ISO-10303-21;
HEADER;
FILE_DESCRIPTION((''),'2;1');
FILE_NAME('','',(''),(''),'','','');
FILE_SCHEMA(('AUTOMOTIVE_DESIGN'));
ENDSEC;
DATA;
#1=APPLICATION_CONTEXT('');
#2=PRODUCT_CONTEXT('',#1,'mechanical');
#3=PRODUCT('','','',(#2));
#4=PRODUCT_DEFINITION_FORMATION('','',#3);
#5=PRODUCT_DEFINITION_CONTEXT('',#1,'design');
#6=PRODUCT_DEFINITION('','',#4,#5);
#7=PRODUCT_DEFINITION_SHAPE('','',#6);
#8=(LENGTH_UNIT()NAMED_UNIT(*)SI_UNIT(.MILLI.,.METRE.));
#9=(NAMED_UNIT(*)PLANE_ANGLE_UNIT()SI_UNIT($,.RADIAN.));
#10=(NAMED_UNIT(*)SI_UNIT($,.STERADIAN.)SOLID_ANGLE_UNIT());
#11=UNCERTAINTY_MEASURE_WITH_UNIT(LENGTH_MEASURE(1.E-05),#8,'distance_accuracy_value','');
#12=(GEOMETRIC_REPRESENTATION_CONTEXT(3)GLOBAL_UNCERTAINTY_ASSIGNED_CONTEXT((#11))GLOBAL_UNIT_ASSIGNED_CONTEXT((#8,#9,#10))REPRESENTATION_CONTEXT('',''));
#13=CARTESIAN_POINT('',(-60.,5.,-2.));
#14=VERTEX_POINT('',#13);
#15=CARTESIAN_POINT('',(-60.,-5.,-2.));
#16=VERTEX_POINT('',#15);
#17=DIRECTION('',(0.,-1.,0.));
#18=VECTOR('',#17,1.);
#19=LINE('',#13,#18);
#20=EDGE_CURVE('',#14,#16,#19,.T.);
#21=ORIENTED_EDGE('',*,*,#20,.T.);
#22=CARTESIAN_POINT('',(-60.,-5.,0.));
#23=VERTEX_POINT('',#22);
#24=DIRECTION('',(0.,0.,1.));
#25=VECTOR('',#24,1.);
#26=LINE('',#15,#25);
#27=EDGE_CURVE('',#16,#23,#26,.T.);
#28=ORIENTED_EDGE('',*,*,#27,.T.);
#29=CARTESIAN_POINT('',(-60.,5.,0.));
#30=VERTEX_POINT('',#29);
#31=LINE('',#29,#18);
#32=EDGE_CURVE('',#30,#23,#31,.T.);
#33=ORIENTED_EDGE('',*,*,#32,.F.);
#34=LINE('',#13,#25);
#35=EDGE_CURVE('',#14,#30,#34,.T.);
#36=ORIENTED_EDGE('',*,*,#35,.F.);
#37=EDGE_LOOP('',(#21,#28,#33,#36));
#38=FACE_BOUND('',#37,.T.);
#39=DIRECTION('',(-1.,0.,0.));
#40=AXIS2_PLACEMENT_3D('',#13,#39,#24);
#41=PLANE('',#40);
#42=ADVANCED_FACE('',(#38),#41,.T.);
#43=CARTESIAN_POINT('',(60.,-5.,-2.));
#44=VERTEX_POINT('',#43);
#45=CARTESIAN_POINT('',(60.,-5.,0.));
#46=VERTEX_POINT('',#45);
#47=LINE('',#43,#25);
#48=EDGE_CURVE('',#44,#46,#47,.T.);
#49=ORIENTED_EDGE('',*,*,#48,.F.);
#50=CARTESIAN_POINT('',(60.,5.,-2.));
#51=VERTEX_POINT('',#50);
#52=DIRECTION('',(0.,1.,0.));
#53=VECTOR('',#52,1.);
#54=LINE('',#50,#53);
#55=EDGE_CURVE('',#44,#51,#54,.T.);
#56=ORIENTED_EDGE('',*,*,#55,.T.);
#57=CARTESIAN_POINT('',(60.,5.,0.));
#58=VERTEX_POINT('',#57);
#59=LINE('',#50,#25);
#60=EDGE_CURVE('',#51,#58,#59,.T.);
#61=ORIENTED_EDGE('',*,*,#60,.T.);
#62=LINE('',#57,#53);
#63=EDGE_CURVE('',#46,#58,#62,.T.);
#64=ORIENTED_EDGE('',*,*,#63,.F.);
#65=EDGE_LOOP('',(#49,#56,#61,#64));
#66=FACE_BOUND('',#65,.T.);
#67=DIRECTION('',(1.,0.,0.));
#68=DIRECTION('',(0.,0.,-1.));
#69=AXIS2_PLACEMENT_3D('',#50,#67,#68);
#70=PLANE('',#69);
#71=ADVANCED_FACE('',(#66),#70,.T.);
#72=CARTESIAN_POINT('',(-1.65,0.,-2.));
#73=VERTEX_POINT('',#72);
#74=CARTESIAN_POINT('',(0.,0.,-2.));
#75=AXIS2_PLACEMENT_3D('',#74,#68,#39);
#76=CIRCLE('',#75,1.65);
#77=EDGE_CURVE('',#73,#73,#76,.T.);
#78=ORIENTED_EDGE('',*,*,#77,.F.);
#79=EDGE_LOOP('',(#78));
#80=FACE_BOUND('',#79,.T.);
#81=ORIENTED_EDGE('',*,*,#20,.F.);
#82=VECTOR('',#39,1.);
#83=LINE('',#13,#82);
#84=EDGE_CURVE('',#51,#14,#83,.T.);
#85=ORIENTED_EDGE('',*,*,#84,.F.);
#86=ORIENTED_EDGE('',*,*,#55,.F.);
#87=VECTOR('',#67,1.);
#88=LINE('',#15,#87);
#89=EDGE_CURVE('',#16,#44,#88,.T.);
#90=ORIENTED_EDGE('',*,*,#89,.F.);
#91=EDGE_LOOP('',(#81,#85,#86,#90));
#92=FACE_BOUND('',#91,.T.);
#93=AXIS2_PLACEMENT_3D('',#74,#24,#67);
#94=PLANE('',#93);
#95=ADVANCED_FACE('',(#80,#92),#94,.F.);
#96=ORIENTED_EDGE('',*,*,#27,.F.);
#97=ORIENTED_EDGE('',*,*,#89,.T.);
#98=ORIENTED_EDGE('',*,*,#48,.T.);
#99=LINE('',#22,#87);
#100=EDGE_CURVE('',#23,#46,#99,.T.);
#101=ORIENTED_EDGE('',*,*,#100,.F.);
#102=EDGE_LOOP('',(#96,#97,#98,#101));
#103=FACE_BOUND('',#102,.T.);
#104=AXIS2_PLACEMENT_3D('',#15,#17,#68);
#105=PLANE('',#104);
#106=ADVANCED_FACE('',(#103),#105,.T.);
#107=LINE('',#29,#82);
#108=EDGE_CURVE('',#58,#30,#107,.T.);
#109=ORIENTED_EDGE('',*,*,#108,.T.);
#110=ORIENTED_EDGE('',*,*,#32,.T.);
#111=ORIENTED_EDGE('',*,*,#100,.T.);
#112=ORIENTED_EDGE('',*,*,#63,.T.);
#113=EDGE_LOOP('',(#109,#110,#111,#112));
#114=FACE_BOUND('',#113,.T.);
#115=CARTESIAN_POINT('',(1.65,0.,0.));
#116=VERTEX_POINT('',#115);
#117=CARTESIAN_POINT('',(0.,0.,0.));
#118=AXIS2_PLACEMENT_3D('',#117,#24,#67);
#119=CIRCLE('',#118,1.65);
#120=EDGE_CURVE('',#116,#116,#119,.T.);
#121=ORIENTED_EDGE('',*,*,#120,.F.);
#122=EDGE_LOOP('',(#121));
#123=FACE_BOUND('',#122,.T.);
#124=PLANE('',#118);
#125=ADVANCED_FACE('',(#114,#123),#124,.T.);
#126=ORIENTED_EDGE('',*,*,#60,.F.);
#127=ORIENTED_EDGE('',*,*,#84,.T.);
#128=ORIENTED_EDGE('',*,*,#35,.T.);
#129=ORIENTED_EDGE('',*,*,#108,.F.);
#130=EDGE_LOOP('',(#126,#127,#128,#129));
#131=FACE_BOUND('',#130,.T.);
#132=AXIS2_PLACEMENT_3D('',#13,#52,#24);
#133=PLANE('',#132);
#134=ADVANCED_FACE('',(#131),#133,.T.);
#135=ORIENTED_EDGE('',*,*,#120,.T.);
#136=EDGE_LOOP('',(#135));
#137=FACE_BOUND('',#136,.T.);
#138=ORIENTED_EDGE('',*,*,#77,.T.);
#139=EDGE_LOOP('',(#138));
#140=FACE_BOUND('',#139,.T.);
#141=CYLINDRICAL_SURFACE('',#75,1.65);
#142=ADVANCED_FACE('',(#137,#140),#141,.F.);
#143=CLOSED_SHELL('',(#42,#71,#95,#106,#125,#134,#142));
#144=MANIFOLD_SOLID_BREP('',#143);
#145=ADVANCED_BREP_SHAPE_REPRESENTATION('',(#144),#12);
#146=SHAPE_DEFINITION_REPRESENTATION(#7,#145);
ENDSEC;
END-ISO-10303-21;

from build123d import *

# Parameters (mm, degrees)
ESBO_O1_W                                      = 120
ESBO_O1_H                                      = 10
FLANGE_BASE1_DEPTH                             = 2
BROCA_DE_ROSQUEAR_DE_CANO_PARA_TARRAXA_D_D     = 3.3
BROCA_DE_ROSQUEAR_DE_CANO_PARA_TARRAXA_D_DEPTH = 4
BROCA_DE_ROSQUEAR_DE_CANO_PARA_TARRAXA_D_TIP   = 0.991420021


# Sheet-metal steps are written as plain solids
with BuildPart() as part:
    # Esboço1 → Flange-base1 (new body)
    with BuildSketch(Plane.XY):
        Rectangle(ESBO_O1_W, ESBO_O1_H)
    extrude(amount=-FLANGE_BASE1_DEPTH)

    # Broca de rosquear de cano para tarraxa de 1/81
    with Locations(Plane(origin=(0, 0, -2), x_dir=(-1, 0, 0), z_dir=(0, 0, -1))):
        with Locations((0, 0)):
            Hole(BROCA_DE_ROSQUEAR_DE_CANO_PARA_TARRAXA_D_D / 2, depth=BROCA_DE_ROSQUEAR_DE_CANO_PARA_TARRAXA_D_DEPTH)
            with Locations((0, 0, -(BROCA_DE_ROSQUEAR_DE_CANO_PARA_TARRAXA_D_DEPTH + BROCA_DE_ROSQUEAR_DE_CANO_PARA_TARRAXA_D_TIP / 2))):  # 118° drill point
                Cone(0, BROCA_DE_ROSQUEAR_DE_CANO_PARA_TARRAXA_D_D / 2, BROCA_DE_ROSQUEAR_DE_CANO_PARA_TARRAXA_D_TIP, mode=Mode.SUBTRACT)


solid = part.part
